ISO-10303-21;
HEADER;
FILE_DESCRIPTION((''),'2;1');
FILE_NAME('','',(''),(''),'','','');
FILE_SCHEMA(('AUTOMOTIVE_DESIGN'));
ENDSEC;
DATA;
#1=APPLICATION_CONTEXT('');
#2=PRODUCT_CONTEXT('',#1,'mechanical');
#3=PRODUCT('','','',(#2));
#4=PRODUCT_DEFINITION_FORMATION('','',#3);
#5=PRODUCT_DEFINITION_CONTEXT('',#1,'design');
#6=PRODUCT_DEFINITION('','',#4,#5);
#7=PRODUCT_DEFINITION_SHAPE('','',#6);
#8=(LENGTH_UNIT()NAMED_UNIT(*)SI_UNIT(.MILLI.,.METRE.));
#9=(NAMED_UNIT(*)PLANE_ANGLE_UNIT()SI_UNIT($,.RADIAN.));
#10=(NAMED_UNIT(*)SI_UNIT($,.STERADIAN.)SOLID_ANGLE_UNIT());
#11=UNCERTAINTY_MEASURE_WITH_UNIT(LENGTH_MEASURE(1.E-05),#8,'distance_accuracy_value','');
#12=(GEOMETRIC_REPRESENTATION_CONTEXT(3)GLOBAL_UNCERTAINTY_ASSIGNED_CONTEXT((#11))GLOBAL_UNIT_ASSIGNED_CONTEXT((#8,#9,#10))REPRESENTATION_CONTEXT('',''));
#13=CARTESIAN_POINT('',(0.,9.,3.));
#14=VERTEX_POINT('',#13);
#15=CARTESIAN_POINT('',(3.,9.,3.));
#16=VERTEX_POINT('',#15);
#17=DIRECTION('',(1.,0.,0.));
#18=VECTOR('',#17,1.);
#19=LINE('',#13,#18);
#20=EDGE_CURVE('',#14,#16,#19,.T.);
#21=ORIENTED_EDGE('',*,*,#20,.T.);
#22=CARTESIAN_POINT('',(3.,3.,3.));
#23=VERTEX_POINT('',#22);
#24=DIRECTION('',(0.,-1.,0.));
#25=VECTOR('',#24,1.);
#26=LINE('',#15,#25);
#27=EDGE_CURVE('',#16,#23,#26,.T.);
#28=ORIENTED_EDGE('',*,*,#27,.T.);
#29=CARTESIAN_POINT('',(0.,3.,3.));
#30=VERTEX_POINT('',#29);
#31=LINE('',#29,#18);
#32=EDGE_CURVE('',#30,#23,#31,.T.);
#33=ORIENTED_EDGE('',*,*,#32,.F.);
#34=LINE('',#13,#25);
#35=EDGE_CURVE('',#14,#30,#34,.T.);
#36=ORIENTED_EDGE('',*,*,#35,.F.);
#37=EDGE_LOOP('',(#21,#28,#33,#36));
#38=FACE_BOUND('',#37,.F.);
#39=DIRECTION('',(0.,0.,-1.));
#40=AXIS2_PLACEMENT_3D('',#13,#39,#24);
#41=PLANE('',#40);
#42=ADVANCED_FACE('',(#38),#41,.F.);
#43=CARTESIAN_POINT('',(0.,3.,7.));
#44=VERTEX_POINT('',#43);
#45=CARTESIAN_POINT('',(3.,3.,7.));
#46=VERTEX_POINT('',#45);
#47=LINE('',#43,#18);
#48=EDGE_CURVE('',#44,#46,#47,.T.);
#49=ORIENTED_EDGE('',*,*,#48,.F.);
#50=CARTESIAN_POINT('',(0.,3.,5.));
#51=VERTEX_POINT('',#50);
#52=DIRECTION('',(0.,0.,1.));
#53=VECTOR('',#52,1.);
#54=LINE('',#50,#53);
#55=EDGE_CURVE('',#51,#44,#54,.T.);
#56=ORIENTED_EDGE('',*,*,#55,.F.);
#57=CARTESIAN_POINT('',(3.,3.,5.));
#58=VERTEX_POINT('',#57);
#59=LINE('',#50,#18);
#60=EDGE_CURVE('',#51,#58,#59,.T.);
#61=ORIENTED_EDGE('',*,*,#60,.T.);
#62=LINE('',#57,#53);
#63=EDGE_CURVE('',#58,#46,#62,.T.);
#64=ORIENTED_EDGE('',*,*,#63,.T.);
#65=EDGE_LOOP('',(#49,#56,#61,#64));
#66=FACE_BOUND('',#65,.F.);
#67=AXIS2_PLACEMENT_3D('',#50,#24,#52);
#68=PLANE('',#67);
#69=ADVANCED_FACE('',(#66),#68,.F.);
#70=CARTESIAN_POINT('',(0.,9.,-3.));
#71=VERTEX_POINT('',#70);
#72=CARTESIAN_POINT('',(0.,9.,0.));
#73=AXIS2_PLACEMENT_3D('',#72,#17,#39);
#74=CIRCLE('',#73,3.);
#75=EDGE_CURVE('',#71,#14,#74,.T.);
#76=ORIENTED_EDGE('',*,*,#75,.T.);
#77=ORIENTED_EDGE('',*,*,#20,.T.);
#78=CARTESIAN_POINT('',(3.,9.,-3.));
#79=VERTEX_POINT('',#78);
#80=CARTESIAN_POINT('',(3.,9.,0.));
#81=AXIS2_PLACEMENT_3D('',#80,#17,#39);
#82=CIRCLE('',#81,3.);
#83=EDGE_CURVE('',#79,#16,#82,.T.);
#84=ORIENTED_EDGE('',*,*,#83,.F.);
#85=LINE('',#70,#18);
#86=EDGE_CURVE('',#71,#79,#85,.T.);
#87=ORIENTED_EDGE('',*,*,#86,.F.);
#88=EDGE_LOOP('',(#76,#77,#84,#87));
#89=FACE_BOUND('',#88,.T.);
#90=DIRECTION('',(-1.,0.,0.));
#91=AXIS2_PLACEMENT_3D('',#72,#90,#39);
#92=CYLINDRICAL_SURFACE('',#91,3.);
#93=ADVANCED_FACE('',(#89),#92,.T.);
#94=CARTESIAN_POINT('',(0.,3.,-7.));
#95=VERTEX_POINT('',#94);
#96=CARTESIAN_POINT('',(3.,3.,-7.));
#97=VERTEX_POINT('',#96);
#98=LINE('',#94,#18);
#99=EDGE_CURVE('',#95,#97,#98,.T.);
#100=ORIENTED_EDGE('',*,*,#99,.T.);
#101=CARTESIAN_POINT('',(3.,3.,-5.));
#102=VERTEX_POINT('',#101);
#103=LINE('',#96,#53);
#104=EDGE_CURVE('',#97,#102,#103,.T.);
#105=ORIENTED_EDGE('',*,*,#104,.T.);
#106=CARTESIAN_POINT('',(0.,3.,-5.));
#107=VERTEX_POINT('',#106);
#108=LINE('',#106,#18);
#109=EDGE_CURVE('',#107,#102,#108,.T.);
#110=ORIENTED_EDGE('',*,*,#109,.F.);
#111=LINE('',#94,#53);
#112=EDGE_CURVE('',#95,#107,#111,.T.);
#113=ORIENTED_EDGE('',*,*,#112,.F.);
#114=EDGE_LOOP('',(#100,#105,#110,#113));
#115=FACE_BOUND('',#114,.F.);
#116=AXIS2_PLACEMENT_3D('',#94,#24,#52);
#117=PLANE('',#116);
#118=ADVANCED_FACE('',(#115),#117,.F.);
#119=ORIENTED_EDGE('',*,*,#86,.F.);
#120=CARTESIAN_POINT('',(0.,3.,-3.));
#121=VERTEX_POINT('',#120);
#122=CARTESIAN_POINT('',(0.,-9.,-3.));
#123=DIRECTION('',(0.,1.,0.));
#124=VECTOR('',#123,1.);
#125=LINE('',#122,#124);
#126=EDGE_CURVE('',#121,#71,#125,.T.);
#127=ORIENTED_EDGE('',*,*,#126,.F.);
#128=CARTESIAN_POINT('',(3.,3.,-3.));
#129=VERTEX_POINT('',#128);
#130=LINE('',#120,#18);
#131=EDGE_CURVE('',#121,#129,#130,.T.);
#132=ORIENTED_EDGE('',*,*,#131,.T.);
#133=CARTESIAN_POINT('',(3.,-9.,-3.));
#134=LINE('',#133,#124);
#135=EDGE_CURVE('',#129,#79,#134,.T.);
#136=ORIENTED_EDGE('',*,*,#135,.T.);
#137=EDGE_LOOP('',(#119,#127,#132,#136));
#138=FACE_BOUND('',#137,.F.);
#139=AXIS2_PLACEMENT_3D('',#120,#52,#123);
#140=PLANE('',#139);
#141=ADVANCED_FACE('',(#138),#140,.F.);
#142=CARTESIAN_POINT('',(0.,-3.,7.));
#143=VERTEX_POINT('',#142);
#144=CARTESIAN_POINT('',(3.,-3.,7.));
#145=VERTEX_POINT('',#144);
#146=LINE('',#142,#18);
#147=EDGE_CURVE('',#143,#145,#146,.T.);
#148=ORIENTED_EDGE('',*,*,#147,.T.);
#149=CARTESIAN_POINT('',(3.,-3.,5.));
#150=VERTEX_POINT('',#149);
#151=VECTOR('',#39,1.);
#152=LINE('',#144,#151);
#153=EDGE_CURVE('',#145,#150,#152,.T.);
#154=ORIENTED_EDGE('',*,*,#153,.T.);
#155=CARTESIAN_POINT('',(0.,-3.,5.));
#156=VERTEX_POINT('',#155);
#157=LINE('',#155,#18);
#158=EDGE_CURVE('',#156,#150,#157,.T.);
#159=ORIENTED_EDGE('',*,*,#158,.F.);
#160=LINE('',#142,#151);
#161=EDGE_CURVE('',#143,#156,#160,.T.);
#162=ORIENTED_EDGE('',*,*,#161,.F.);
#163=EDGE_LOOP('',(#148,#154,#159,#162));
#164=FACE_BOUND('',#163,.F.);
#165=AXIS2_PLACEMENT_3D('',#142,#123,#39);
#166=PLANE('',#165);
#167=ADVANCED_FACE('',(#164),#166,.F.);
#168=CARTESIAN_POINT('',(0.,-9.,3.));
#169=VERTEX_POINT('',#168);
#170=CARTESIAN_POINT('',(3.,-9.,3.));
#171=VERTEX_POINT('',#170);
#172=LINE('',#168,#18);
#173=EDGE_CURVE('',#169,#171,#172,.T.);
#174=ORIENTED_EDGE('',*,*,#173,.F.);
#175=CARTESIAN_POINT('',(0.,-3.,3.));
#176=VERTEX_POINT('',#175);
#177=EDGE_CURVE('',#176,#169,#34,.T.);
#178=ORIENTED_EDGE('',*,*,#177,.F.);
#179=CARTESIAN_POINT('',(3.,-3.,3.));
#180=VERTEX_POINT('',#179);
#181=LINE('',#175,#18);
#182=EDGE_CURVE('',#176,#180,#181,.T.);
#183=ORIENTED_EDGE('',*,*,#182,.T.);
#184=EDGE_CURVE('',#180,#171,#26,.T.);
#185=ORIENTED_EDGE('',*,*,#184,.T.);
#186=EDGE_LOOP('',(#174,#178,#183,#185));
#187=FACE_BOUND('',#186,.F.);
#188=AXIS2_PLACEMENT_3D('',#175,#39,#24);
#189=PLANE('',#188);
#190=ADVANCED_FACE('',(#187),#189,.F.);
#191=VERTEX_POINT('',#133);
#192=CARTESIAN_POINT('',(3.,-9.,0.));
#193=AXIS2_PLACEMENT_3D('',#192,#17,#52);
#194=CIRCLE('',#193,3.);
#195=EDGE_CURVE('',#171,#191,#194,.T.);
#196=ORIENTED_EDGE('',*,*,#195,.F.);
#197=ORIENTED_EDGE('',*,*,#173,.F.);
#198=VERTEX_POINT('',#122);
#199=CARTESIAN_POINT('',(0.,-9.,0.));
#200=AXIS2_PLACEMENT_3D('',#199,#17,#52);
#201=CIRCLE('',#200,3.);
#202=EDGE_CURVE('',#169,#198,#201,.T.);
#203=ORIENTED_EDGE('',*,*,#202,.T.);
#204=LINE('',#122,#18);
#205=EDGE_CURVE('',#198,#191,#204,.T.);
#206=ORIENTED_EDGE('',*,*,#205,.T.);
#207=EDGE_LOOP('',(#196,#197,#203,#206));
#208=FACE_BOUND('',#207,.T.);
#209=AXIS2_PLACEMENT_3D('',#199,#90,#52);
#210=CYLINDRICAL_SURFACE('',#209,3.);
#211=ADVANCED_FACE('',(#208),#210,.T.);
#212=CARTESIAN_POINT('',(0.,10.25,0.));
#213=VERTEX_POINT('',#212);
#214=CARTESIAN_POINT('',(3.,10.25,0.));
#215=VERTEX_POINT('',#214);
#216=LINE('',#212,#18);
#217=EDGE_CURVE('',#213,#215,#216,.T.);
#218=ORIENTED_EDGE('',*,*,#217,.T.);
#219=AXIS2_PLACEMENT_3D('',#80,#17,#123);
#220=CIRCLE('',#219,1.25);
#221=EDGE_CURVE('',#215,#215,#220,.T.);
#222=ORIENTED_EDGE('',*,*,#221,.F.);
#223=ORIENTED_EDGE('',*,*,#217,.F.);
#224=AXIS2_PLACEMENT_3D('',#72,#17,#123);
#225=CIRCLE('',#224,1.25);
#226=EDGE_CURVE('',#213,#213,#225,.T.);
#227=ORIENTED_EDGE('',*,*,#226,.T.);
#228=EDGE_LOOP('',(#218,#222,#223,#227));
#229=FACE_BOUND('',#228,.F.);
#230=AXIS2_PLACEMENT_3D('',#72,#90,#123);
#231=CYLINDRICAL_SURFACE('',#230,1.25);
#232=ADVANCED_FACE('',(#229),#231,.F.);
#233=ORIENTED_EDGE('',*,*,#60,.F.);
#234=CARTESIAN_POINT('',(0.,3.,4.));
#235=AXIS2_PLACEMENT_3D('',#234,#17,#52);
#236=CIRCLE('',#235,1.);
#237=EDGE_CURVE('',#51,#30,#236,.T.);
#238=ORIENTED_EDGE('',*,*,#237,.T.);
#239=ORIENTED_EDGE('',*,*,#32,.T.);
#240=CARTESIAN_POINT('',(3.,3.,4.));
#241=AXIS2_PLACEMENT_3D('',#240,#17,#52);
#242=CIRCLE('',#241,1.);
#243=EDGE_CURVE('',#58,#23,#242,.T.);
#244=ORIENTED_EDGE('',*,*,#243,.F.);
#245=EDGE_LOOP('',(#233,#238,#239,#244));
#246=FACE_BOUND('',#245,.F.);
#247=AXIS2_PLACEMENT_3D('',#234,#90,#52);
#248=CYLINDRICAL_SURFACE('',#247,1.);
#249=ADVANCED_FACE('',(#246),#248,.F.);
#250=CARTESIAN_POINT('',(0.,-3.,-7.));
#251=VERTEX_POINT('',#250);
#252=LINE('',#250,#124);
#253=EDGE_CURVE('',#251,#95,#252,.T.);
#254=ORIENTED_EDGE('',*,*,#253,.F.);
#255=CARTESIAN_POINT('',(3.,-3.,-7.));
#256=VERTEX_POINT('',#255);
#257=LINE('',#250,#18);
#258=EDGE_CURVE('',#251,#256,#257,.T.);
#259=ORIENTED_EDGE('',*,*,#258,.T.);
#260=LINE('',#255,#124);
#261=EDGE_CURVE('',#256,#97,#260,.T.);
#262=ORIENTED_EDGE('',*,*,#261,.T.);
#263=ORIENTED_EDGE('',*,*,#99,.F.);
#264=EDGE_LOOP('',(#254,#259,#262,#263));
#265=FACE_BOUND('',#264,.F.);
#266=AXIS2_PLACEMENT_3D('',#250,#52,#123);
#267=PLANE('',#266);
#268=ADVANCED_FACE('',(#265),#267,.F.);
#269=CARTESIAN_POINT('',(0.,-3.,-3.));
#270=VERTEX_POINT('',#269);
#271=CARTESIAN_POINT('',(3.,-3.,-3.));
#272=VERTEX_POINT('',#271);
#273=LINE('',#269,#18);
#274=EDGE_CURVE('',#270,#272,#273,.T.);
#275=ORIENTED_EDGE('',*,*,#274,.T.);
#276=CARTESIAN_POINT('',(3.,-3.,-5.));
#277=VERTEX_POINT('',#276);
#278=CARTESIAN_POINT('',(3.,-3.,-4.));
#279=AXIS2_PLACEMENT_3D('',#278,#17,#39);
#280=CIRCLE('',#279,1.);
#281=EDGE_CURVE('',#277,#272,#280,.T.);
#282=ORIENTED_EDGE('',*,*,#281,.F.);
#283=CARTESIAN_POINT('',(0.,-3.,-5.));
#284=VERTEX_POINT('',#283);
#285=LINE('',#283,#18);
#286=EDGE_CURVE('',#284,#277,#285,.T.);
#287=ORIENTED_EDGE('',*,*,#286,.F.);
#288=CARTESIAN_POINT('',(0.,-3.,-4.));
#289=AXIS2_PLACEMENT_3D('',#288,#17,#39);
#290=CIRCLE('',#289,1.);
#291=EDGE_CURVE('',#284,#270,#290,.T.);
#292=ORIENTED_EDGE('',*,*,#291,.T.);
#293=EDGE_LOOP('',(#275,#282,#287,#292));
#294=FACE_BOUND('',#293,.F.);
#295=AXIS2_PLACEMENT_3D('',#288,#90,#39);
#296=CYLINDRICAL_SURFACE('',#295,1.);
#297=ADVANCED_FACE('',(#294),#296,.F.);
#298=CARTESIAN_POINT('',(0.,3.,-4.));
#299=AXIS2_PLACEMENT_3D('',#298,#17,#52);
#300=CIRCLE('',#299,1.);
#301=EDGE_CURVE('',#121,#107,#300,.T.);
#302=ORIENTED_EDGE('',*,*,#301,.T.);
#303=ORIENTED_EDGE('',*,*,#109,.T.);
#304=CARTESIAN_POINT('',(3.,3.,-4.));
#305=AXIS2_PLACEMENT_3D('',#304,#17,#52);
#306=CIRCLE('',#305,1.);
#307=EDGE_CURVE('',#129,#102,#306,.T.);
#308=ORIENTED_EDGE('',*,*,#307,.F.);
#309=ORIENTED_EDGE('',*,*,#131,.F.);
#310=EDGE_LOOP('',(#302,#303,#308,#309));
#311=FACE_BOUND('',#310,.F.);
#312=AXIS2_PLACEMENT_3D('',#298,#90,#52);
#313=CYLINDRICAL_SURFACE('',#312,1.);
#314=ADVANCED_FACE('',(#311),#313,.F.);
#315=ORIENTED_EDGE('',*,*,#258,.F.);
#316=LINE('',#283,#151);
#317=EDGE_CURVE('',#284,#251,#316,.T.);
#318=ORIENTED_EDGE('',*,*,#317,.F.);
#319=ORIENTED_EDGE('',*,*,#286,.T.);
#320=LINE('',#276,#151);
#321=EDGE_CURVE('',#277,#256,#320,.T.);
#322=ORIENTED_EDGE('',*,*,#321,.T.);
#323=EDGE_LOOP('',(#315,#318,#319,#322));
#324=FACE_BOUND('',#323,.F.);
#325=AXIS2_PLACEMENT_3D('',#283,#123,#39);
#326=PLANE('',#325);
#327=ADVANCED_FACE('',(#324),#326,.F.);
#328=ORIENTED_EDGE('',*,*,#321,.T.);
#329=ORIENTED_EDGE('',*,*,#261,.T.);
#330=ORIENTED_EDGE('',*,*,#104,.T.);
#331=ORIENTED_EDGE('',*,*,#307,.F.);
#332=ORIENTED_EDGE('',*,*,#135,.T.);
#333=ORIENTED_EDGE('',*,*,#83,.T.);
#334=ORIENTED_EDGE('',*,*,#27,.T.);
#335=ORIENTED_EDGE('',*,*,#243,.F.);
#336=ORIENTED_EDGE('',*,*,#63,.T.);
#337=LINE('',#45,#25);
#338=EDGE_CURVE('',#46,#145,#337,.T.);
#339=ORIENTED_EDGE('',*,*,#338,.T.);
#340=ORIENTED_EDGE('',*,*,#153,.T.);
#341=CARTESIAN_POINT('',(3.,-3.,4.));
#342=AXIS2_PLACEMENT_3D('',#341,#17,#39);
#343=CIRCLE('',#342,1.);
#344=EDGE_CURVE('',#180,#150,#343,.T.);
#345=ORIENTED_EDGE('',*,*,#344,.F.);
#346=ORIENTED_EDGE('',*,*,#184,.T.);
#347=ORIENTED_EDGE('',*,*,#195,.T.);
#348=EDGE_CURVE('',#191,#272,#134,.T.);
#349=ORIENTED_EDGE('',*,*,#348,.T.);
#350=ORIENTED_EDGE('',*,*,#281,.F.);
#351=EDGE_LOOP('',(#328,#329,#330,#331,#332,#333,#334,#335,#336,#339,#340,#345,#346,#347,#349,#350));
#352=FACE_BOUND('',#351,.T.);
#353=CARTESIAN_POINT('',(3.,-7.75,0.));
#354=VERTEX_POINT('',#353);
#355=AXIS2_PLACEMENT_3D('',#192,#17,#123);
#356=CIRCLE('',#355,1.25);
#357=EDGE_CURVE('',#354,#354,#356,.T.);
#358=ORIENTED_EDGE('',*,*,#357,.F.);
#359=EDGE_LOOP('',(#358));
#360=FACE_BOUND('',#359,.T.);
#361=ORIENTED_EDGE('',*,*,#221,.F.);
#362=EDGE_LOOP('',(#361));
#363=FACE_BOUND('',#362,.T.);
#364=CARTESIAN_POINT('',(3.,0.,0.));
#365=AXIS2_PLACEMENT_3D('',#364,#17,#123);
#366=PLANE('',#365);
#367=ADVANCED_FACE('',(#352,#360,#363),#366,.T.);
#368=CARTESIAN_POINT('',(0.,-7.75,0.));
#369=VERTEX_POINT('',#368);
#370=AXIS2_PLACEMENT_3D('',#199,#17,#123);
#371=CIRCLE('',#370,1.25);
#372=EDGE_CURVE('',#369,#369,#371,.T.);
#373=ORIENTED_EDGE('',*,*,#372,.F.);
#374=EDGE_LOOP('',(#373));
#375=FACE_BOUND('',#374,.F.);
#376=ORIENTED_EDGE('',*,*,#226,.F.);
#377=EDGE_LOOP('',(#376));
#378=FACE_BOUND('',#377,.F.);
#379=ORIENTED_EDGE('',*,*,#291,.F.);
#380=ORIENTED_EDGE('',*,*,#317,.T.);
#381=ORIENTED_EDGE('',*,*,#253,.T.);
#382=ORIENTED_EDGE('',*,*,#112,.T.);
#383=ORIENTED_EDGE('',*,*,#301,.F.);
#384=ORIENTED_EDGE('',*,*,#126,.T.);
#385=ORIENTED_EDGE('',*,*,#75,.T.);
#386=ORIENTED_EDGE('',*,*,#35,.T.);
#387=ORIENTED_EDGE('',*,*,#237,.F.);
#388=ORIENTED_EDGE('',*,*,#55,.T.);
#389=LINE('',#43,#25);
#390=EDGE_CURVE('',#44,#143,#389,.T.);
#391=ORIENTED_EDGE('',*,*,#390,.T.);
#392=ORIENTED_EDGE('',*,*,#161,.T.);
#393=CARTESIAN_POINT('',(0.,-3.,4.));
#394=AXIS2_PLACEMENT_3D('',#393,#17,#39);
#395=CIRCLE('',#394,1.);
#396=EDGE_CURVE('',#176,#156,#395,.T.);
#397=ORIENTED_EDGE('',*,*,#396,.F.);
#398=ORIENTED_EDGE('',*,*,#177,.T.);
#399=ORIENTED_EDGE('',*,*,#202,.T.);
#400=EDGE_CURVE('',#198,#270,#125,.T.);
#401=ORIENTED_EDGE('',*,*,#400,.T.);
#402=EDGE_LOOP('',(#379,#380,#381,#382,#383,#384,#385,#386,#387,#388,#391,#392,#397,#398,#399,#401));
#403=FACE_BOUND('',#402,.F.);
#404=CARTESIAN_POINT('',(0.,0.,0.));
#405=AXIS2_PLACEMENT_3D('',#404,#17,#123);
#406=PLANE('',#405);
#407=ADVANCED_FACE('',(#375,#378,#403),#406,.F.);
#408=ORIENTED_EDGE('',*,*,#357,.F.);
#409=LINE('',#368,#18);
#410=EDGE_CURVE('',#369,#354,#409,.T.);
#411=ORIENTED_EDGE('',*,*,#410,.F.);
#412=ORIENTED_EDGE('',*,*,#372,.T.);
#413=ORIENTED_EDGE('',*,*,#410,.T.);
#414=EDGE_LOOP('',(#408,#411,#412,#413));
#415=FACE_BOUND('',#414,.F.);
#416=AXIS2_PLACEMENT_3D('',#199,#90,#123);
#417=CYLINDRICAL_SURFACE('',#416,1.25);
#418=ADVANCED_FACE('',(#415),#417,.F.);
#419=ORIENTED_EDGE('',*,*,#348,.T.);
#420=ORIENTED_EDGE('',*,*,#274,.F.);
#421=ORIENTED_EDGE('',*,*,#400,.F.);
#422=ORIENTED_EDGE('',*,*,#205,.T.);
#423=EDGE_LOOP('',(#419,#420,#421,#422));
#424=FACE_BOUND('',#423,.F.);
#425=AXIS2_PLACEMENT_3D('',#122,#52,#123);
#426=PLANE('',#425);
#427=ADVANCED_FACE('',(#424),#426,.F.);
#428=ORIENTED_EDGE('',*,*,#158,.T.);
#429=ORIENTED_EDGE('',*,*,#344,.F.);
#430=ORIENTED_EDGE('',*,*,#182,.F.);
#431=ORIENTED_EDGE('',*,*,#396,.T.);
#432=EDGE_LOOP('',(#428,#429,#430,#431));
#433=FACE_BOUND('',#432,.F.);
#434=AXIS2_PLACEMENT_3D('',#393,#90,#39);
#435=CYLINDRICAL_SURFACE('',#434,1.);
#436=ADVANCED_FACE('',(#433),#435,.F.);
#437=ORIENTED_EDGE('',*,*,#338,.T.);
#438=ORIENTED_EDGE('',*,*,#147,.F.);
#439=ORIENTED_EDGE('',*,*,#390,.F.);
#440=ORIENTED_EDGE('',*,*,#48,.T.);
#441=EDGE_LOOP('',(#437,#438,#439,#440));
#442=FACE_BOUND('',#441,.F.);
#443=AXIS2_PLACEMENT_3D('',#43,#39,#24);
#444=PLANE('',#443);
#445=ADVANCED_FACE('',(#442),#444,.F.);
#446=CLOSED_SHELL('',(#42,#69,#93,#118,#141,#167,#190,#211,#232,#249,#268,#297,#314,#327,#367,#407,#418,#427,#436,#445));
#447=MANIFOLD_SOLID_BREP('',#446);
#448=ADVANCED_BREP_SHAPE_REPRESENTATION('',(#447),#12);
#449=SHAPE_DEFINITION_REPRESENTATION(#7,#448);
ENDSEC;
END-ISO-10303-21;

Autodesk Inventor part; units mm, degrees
ref_plane "YZ Plane" through (0, 0, 0) normal (1, 0, 0) x (0, 1, 0)
ref_plane "XZ Plane" through (0, 0, 0) normal (0, 1, 0) x (-1, 0, 0)
ref_plane "XY Plane" through (0, 0, 0) normal (0, 0, 1) x (1, 0, 0)
sketch "スケッチ1" plane through (0, 0, 0) normal (1, 0, 0) x (0, 1, 0)
  line L0 (9, 0) -> (-9, 0) construction
  line L1 (9, 3) -> (-9, 3)
  line L2 (-9, -3) -> (9, -3)
  arc A0 (9, -3) -> (9, 3) centre (9, 0) ccw
  arc A1 (-9, 3) -> (-9, -3) centre (-9, 0) ccw
  line L3 (3, 7) -> (-3, 7)
  line L4 (-3, -7) -> (3, -7)
  line L5 (3, 7) -> (-3, -7) construction
  line L6 (-3, 7) -> (3, -7) construction
  arc A2 (3, 5) -> (3, 3) centre (3, 4) ccw
  arc A3 (-3, 3) -> (-3, 5) centre (-3, 4) ccw
  arc A4 (-3, -5) -> (-3, -3) centre (-3, -4) ccw
  arc A5 (3, -3) -> (3, -5) centre (3, -4) ccw
  line L7 (-3, 7) -> (-3, 5)
  line L8 (3, 5) -> (3, 7)
  line L9 (3, -7) -> (3, -5)
  line L10 (3, -3) -> (3, 3)
  line L11 (-3, 3) -> (-3, -3)
  line L12 (-3, -5) -> (-3, -7)
  circle A6 centre (-9, 0) radius 1.25
  circle A7 centre (9, 0) radius 1.25
  point P0 (0, 0)
  dimension "d0" = 6
  dimension "d1" = 6
  dimension "d2" = 1
  dimension "d3" = 14
  dimension "d4" = 18
  dimension "d7" = 0
  dimension "d8" = 6
  dimension "d9" = 4
  dimension "d10" = 6
  dimension "d11" = 2.5
  dimension "d12" = 2.5
extrude "押し出し1" add sketch "スケッチ1" along normal blind 3
properties part number "tip" material "アルミニウム 2014-T4"
